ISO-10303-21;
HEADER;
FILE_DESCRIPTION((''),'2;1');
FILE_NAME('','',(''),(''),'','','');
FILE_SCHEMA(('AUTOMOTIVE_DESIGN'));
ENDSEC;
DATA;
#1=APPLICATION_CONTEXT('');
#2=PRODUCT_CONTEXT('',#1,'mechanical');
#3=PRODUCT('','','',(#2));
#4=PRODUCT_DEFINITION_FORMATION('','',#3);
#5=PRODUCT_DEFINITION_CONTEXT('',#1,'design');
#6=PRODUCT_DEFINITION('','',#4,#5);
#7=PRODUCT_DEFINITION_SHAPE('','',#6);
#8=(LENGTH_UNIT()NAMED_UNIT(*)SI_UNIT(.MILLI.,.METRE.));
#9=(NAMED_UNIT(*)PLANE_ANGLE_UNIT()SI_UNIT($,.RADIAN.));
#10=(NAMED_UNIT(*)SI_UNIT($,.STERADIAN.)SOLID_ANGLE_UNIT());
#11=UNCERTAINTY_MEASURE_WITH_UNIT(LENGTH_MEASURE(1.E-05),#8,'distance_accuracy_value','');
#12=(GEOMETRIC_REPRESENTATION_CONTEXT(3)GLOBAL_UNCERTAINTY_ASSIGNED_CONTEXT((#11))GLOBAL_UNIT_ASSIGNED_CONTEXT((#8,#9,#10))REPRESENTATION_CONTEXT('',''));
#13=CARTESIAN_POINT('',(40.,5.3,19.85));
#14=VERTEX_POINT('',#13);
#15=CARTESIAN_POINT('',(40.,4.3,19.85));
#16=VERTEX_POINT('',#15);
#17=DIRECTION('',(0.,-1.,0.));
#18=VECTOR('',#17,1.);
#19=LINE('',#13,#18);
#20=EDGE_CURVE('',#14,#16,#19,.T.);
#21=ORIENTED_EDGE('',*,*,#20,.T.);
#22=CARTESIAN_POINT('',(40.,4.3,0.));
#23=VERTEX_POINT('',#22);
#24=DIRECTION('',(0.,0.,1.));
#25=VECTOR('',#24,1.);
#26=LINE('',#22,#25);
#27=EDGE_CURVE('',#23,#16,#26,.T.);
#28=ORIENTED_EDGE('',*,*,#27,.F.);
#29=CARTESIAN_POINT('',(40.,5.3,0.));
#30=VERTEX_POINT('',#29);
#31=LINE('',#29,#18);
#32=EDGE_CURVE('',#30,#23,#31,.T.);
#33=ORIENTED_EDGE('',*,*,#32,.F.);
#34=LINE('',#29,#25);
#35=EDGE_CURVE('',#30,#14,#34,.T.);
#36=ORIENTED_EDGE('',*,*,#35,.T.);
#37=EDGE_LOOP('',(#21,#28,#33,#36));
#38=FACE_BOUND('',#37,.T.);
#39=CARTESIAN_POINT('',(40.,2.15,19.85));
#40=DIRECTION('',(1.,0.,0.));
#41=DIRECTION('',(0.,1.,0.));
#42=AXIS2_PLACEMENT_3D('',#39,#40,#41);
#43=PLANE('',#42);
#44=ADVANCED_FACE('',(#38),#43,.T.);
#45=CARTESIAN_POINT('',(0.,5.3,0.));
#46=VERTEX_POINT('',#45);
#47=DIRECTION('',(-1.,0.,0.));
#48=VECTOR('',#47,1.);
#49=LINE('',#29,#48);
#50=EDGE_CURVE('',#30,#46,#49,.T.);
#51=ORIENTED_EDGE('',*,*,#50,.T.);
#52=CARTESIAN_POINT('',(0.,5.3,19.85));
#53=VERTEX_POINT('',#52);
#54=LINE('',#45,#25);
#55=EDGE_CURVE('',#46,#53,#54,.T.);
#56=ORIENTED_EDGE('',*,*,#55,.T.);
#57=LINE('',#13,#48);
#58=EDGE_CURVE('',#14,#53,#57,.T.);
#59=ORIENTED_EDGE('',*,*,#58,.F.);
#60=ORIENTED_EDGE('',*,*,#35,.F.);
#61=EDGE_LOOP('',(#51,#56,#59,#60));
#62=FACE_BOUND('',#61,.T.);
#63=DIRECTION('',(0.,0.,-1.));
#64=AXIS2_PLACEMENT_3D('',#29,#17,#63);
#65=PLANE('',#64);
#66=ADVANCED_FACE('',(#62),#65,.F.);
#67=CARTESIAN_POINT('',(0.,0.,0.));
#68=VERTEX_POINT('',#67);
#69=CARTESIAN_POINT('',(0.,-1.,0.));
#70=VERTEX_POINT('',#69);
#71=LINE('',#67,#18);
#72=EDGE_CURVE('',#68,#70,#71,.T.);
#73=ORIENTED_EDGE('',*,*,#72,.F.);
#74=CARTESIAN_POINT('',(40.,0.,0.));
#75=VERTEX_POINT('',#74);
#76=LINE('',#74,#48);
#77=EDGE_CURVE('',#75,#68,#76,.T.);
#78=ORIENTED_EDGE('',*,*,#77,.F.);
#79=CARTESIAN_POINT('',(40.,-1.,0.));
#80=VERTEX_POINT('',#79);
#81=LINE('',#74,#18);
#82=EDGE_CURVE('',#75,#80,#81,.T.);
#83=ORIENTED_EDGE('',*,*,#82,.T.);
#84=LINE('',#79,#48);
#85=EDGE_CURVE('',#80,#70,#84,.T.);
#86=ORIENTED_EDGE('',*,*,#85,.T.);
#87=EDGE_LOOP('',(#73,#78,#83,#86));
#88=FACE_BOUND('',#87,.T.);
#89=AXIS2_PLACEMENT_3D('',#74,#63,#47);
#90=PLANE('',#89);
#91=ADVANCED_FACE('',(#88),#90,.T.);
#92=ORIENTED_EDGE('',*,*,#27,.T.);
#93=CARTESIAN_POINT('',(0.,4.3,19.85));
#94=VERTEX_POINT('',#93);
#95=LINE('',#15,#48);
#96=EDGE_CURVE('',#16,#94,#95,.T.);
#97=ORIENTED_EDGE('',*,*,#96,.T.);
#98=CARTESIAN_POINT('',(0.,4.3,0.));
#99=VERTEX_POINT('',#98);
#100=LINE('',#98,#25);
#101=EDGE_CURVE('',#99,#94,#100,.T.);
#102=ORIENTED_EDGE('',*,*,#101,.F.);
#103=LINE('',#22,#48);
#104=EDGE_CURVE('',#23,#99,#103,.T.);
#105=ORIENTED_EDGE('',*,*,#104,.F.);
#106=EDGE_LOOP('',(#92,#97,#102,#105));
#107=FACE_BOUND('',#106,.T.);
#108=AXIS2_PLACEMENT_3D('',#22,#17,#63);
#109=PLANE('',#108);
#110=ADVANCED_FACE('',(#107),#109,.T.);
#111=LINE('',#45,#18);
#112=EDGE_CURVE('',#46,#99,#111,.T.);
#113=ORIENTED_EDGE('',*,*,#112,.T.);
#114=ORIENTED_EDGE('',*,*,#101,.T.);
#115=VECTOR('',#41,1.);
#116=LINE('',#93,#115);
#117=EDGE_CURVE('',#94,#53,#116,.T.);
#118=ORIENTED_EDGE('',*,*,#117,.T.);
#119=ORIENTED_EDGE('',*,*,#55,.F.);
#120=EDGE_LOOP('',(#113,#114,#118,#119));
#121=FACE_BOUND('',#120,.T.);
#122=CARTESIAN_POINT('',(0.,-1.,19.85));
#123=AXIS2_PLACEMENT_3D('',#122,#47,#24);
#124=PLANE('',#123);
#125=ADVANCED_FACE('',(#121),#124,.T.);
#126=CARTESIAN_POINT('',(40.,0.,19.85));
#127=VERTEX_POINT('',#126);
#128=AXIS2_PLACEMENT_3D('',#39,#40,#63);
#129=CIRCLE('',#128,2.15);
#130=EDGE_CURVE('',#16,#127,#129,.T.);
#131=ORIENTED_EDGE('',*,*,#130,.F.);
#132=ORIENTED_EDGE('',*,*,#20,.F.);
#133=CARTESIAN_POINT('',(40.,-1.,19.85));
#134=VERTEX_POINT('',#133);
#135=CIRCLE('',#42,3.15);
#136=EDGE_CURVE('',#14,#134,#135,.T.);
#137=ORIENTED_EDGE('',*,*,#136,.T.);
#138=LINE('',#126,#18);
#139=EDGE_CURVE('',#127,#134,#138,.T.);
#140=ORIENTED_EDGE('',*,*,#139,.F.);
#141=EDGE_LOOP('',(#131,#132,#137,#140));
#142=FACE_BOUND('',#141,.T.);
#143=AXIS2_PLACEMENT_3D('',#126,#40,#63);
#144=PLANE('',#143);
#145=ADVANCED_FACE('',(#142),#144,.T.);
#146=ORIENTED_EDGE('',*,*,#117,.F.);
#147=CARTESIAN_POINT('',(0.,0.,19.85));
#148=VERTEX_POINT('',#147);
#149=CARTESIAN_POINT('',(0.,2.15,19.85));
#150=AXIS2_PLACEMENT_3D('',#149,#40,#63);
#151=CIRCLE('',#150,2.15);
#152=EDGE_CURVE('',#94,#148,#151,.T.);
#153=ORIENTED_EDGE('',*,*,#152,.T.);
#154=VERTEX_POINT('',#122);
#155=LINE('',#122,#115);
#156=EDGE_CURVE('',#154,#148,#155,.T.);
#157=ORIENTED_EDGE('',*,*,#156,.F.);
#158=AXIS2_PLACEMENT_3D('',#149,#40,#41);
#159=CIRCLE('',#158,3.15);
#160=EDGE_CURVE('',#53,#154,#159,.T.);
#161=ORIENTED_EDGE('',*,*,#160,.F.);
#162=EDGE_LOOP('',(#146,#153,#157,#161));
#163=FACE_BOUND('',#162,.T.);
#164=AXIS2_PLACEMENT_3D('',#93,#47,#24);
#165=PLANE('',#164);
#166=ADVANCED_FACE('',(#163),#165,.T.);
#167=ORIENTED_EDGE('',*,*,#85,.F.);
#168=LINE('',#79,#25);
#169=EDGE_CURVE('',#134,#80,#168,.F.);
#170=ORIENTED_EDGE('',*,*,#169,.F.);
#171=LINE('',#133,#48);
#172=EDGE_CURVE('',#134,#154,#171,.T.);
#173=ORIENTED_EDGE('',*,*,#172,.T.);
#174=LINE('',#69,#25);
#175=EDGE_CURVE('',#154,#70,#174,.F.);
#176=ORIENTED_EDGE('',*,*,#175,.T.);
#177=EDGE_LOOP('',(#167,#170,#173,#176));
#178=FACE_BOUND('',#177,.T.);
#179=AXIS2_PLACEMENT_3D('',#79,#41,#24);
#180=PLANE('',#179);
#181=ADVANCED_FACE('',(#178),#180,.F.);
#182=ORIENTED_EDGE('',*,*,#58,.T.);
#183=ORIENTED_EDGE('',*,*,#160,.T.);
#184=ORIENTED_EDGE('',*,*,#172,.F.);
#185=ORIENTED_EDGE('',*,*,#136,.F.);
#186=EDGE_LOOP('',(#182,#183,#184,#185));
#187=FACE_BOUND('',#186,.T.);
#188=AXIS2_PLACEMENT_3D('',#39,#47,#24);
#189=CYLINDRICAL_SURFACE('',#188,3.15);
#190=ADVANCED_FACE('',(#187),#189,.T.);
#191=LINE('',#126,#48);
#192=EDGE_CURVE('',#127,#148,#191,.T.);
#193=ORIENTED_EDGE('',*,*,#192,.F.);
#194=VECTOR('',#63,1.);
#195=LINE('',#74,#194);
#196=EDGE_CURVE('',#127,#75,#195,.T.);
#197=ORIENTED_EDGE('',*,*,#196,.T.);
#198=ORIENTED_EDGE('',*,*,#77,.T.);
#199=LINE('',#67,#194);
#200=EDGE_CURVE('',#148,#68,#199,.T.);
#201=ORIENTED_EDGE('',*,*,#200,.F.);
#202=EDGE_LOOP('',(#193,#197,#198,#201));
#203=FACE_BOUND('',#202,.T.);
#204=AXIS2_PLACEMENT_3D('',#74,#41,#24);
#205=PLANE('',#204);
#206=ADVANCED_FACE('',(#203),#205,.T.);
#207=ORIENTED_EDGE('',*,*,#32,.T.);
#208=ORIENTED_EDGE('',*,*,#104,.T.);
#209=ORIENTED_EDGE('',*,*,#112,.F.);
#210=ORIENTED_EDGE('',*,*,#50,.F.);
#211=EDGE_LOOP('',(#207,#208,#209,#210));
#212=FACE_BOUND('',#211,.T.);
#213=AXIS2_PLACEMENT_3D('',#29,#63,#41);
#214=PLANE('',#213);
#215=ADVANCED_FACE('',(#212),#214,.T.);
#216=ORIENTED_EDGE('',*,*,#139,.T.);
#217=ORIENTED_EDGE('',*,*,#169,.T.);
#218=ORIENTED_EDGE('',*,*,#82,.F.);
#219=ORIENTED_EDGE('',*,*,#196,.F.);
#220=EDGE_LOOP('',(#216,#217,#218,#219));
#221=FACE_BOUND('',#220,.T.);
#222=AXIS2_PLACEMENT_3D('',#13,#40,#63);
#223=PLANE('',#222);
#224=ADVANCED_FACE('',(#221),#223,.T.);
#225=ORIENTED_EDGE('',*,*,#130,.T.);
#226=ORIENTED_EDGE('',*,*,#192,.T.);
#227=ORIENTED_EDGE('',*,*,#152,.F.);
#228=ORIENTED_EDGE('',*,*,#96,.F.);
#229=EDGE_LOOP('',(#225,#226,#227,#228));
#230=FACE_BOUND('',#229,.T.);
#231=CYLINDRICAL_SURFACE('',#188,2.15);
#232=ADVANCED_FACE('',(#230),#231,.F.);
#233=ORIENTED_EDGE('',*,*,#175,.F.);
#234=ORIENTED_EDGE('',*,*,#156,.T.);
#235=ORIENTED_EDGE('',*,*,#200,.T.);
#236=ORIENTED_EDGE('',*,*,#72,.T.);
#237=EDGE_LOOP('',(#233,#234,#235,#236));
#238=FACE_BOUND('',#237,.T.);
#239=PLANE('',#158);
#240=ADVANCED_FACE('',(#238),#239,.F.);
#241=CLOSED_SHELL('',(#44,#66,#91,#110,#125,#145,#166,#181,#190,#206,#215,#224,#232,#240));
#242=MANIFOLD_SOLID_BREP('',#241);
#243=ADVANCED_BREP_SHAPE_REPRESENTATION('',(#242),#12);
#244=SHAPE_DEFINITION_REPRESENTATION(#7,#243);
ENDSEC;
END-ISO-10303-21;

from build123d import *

# Parameters (mm, degrees)
TABAN_FLAN_1_DEPTH = 40


# Sheet-metal steps are written as plain solids
with BuildPart() as part:
    # Çizim1 → Taban-Flanş1 (new body)
    with BuildSketch(Plane.YZ):
        with BuildLine():
            Line((0, 0), (0, 19.85))
            ThreePointArc((0, 19.85), (2.15, 22), (4.3, 19.85))
            Line((4.3, 19.85), (4.3, 0))
            Line((4.3, 0), (5.3, 0))
            Line((5.3, 0), (5.3, 19.85))
            ThreePointArc((5.3, 19.85), (2.15, 23), (-1, 19.85))
            Line((-1, 19.85), (-1, 0))
            Line((-1, 0), (0, 0))
        make_face()
    extrude(amount=TABAN_FLAN_1_DEPTH)


solid = part.part
